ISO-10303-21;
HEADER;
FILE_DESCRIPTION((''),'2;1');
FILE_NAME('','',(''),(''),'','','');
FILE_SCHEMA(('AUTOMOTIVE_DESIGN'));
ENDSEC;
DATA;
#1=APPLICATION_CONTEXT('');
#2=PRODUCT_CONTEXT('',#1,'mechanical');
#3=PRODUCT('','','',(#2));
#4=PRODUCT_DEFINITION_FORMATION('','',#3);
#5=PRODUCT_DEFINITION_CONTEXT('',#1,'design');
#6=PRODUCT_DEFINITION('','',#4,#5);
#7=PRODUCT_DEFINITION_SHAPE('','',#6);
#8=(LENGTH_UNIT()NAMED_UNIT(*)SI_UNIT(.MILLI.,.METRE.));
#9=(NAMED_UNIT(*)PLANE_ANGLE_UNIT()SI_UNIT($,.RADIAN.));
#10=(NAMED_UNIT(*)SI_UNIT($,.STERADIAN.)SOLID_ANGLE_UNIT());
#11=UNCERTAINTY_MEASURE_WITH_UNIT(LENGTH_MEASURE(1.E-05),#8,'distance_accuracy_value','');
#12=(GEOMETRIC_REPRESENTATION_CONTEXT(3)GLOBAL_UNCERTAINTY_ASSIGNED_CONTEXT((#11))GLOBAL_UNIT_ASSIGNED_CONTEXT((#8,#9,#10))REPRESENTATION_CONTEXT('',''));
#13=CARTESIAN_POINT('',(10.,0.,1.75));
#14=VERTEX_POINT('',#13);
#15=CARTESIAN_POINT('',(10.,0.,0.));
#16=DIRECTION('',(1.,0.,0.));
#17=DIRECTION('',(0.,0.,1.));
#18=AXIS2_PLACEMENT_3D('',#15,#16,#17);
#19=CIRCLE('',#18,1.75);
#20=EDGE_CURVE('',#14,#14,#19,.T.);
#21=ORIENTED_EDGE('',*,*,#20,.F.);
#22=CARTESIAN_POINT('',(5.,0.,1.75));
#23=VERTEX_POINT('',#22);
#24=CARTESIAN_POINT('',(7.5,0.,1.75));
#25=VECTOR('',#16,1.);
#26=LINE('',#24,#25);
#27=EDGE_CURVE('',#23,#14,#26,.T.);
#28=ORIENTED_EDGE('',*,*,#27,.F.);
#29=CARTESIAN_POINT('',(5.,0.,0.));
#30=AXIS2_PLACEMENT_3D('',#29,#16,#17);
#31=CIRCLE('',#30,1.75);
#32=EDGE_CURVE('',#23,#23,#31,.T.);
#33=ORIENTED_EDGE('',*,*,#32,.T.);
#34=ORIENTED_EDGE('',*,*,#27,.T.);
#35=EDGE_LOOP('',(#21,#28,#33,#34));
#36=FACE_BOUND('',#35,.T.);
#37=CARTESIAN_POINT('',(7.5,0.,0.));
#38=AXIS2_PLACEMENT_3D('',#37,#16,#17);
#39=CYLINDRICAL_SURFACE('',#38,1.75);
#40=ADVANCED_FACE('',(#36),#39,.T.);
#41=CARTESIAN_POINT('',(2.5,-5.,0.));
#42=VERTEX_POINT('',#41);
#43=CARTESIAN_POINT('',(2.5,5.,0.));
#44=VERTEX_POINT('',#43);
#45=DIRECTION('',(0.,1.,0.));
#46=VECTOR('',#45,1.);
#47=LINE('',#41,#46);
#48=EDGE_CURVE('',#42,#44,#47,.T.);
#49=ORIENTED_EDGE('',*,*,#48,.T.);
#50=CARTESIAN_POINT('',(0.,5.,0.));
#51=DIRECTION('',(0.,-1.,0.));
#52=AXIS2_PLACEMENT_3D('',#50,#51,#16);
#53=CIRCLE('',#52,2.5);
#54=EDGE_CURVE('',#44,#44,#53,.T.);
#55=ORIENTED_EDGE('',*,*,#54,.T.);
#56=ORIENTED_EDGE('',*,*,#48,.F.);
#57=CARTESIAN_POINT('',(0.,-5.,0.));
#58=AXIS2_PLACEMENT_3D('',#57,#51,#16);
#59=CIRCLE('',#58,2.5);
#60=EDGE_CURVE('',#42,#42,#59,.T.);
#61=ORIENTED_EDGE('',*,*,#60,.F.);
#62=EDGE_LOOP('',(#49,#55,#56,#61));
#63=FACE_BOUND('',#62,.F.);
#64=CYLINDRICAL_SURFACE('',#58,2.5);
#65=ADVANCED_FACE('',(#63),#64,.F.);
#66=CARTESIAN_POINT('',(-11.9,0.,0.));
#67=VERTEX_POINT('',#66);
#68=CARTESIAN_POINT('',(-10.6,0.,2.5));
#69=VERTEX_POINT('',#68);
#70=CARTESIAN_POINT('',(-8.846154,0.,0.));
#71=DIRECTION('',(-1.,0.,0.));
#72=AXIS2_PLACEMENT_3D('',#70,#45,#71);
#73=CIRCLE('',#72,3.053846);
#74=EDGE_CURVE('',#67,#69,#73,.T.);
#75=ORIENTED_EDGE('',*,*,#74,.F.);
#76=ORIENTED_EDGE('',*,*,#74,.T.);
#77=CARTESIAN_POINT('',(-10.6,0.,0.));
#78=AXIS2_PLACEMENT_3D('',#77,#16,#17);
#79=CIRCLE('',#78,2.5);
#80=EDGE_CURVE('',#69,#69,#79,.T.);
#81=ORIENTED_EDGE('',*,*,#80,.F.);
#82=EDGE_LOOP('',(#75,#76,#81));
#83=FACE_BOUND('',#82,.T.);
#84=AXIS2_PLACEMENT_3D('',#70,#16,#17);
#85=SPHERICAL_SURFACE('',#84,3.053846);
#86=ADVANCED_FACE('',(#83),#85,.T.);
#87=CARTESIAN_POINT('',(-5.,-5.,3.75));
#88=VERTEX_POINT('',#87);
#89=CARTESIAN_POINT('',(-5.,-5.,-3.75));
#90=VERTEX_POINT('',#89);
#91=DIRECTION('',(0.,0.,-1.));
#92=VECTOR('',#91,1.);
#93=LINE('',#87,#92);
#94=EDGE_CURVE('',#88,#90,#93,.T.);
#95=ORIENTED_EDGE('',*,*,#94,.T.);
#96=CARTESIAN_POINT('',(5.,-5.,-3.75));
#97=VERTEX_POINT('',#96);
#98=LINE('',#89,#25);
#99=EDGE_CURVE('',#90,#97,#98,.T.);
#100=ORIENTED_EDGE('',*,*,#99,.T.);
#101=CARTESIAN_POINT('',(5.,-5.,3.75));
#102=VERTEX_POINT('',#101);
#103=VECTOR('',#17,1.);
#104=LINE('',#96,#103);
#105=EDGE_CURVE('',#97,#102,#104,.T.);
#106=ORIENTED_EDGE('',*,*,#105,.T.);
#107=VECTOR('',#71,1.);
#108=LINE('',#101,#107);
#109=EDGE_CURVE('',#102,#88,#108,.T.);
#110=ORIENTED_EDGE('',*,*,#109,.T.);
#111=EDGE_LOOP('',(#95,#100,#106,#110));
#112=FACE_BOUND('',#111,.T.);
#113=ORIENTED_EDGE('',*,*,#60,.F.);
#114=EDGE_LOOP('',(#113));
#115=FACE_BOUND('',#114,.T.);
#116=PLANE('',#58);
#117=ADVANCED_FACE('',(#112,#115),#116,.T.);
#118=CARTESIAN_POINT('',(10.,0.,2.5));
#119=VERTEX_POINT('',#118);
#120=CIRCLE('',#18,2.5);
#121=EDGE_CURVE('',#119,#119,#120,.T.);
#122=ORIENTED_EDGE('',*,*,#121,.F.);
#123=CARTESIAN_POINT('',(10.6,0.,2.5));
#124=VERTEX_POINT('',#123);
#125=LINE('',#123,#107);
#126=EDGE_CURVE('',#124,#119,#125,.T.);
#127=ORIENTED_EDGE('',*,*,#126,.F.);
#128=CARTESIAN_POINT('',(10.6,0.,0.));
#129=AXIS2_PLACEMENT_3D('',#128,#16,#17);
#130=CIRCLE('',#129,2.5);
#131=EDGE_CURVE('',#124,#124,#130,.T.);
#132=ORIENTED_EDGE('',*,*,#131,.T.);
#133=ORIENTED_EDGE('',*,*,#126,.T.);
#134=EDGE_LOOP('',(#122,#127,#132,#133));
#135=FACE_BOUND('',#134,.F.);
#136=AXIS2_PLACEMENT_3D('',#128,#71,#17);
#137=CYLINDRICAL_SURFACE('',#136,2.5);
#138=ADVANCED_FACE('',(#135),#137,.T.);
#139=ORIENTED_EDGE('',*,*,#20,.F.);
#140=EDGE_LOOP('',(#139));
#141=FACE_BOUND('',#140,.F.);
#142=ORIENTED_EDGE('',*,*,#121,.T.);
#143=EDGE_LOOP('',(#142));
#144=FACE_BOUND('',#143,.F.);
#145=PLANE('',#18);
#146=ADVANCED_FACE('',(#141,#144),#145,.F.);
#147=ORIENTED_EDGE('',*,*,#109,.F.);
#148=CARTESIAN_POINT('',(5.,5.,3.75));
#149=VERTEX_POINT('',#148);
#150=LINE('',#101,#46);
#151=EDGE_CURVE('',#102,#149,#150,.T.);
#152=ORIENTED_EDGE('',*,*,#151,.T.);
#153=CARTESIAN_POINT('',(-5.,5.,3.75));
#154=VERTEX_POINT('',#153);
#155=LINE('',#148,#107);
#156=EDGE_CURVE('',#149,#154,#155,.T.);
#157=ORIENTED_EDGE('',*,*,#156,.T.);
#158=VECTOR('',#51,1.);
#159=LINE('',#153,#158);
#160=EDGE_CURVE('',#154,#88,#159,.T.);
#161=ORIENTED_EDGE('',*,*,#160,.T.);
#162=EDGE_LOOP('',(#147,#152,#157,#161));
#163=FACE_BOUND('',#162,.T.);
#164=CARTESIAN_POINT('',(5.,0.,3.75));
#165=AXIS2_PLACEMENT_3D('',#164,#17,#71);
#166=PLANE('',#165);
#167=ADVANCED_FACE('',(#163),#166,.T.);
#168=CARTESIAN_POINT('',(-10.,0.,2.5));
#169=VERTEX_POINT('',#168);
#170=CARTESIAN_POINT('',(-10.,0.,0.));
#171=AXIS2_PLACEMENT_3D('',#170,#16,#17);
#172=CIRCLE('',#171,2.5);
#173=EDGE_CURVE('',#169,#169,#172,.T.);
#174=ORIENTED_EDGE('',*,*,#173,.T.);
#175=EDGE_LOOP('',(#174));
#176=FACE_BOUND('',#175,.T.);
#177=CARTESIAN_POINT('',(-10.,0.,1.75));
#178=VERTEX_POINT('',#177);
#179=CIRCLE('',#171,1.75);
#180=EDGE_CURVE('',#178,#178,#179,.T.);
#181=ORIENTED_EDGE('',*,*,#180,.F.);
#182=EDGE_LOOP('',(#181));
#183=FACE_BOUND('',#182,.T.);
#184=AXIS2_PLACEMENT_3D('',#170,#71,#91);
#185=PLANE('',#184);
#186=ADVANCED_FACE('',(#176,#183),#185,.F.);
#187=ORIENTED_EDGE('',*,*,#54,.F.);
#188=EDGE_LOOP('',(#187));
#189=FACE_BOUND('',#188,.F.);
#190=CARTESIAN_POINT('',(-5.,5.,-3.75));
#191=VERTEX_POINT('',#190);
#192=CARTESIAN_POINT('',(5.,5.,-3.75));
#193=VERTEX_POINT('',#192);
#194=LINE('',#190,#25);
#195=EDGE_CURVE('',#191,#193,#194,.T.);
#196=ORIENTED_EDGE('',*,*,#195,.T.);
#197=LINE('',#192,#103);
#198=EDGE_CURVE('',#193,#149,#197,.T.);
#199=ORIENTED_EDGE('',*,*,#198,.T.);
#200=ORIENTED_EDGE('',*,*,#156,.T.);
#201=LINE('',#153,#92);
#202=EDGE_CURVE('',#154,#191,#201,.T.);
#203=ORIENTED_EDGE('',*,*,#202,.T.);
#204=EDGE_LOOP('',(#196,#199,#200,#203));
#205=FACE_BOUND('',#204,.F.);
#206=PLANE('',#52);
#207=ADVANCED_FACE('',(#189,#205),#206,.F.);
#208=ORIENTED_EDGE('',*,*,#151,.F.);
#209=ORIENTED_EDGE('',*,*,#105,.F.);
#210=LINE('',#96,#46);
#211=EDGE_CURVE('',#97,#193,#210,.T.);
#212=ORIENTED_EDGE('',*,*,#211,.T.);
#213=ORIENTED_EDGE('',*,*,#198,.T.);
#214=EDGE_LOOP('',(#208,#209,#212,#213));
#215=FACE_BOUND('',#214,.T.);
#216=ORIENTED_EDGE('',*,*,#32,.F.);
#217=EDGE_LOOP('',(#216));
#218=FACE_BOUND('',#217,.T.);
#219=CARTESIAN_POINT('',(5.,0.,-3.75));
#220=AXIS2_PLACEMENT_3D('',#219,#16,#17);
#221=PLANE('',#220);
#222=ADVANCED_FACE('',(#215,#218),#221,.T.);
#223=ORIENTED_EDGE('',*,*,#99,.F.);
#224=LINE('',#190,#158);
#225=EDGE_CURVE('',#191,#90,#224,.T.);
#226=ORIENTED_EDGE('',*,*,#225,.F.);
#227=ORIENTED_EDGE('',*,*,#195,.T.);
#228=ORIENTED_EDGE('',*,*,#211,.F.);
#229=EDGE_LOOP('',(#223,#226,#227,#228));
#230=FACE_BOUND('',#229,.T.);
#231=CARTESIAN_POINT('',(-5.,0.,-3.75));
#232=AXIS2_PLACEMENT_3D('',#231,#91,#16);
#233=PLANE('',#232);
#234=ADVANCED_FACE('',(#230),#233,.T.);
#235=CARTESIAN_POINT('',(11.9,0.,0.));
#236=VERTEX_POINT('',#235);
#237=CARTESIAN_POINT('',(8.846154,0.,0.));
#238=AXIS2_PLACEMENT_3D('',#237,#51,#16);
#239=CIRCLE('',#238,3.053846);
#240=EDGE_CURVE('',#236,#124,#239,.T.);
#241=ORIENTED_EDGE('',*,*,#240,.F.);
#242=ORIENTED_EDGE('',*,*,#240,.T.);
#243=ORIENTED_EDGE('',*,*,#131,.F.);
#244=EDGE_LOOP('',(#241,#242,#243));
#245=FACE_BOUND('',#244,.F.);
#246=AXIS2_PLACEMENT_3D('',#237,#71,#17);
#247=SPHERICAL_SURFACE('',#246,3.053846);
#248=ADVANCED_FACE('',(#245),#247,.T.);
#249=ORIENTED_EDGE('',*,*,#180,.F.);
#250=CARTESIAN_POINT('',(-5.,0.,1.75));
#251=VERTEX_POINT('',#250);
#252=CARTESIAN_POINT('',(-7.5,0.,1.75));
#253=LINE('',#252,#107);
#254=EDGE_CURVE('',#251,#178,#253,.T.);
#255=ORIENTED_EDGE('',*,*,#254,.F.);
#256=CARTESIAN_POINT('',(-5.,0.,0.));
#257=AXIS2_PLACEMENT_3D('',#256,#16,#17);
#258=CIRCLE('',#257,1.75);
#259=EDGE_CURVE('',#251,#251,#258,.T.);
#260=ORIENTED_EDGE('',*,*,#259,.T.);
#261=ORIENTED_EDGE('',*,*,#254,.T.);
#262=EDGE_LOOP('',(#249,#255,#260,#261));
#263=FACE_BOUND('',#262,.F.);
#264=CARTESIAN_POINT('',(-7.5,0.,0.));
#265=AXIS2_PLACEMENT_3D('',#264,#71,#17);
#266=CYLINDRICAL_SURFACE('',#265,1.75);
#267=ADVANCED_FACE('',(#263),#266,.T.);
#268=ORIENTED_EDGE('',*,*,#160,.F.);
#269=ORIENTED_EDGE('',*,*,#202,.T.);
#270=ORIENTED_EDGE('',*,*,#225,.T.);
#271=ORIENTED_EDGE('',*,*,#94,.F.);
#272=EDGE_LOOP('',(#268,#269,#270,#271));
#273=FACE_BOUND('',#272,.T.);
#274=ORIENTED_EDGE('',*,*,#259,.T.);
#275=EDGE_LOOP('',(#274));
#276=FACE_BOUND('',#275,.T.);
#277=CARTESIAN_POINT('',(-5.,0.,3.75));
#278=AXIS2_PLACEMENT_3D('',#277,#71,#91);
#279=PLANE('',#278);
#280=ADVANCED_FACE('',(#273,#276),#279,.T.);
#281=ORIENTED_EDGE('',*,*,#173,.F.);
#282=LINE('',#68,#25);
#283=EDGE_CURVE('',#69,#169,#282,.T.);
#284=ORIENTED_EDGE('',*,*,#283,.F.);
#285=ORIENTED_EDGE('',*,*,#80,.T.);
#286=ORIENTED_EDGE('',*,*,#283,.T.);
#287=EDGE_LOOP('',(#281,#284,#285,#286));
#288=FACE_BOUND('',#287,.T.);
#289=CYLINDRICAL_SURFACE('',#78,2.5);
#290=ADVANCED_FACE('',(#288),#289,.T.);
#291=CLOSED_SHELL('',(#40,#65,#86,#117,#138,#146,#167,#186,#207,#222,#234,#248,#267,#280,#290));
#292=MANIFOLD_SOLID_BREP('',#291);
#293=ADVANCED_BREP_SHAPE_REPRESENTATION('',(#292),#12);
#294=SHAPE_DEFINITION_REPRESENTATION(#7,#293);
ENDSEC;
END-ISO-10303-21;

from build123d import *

# Parameters (mm, degrees)
F1_DEPTH = 5
F0_W     = 5
F0_H     = 1.75
F5_R     = 2.5
F6_DEPTH = 25


# Not quite as in the source:
# - a pattern or mirror of a feature is missing from the dataset's text; its kind, count and spacing are read off the source's solid
# - a feature names something its author has since deleted; it is built from what else it names


with BuildPart() as f1:
    # F0 (on Front) → F1 (new body, symmetric)
    with BuildSketch(Plane.XZ):
        Polygon((5, 1.75), (5, 3.75), (-5, 3.75), (-5, -3.75), (5, -3.75), (5, 0), align=None)
    extrude(amount=F1_DEPTH, both=True)

    # F0 (on Front) → F2 (revolve)
    with BuildSketch(Plane.XZ):
        with Locations((7.5, 0.875)):
            Rectangle(F0_W, F0_H)
    f2 = revolve(axis=Axis((7.5, 0, 0), (1, 0, 0)))

    # F2_copies: F2 across plane
    add(f2.mirror(Plane(origin=(0, 0, 0), x_dir=(0, 0, -1), z_dir=(-1, 0, 0))))

    # F0 (on Front) → F3 (revolve)
    with BuildSketch(Plane.XZ):
        Polygon((10, 2.5), (10, 1.75), (10, 0), (10.6, 0), (10.6, 2.5), align=None)
    f3 = revolve(axis=Axis((12.1656447835, 0, 0), (1, 0, 0)))

    # F3_copies: F3 across plane
    add(f3.mirror(Plane(origin=(0, 0, 0), x_dir=(0, 0, -1), z_dir=(-1, 0, 0))))

    # F0 (on Front) → F4 (revolve)
    with BuildSketch(Plane.XZ):
        with BuildLine():
            Line((10.6, 2.5), (10.6, 0))
            Line((10.6, 0), (11.9, 0))
            ThreePointArc((11.9, 0), (11.5555774622, 1.4089002804), (10.6, 2.5))
        make_face()
    f4 = revolve(axis=Axis((12.1656447835, 0, 0), (1, 0, 0)))

    # F4_copies: F4 across plane
    add(f4.mirror(Plane(origin=(0, 0, 0), x_dir=(0, 0, -1), z_dir=(-1, 0, 0))))

    # F5 (on face) → F6 (cut)
    with BuildSketch(Plane.XZ.offset(5)):
        Circle(F5_R)
    extrude(amount=-F6_DEPTH, mode=Mode.SUBTRACT)


solid = f1.part
